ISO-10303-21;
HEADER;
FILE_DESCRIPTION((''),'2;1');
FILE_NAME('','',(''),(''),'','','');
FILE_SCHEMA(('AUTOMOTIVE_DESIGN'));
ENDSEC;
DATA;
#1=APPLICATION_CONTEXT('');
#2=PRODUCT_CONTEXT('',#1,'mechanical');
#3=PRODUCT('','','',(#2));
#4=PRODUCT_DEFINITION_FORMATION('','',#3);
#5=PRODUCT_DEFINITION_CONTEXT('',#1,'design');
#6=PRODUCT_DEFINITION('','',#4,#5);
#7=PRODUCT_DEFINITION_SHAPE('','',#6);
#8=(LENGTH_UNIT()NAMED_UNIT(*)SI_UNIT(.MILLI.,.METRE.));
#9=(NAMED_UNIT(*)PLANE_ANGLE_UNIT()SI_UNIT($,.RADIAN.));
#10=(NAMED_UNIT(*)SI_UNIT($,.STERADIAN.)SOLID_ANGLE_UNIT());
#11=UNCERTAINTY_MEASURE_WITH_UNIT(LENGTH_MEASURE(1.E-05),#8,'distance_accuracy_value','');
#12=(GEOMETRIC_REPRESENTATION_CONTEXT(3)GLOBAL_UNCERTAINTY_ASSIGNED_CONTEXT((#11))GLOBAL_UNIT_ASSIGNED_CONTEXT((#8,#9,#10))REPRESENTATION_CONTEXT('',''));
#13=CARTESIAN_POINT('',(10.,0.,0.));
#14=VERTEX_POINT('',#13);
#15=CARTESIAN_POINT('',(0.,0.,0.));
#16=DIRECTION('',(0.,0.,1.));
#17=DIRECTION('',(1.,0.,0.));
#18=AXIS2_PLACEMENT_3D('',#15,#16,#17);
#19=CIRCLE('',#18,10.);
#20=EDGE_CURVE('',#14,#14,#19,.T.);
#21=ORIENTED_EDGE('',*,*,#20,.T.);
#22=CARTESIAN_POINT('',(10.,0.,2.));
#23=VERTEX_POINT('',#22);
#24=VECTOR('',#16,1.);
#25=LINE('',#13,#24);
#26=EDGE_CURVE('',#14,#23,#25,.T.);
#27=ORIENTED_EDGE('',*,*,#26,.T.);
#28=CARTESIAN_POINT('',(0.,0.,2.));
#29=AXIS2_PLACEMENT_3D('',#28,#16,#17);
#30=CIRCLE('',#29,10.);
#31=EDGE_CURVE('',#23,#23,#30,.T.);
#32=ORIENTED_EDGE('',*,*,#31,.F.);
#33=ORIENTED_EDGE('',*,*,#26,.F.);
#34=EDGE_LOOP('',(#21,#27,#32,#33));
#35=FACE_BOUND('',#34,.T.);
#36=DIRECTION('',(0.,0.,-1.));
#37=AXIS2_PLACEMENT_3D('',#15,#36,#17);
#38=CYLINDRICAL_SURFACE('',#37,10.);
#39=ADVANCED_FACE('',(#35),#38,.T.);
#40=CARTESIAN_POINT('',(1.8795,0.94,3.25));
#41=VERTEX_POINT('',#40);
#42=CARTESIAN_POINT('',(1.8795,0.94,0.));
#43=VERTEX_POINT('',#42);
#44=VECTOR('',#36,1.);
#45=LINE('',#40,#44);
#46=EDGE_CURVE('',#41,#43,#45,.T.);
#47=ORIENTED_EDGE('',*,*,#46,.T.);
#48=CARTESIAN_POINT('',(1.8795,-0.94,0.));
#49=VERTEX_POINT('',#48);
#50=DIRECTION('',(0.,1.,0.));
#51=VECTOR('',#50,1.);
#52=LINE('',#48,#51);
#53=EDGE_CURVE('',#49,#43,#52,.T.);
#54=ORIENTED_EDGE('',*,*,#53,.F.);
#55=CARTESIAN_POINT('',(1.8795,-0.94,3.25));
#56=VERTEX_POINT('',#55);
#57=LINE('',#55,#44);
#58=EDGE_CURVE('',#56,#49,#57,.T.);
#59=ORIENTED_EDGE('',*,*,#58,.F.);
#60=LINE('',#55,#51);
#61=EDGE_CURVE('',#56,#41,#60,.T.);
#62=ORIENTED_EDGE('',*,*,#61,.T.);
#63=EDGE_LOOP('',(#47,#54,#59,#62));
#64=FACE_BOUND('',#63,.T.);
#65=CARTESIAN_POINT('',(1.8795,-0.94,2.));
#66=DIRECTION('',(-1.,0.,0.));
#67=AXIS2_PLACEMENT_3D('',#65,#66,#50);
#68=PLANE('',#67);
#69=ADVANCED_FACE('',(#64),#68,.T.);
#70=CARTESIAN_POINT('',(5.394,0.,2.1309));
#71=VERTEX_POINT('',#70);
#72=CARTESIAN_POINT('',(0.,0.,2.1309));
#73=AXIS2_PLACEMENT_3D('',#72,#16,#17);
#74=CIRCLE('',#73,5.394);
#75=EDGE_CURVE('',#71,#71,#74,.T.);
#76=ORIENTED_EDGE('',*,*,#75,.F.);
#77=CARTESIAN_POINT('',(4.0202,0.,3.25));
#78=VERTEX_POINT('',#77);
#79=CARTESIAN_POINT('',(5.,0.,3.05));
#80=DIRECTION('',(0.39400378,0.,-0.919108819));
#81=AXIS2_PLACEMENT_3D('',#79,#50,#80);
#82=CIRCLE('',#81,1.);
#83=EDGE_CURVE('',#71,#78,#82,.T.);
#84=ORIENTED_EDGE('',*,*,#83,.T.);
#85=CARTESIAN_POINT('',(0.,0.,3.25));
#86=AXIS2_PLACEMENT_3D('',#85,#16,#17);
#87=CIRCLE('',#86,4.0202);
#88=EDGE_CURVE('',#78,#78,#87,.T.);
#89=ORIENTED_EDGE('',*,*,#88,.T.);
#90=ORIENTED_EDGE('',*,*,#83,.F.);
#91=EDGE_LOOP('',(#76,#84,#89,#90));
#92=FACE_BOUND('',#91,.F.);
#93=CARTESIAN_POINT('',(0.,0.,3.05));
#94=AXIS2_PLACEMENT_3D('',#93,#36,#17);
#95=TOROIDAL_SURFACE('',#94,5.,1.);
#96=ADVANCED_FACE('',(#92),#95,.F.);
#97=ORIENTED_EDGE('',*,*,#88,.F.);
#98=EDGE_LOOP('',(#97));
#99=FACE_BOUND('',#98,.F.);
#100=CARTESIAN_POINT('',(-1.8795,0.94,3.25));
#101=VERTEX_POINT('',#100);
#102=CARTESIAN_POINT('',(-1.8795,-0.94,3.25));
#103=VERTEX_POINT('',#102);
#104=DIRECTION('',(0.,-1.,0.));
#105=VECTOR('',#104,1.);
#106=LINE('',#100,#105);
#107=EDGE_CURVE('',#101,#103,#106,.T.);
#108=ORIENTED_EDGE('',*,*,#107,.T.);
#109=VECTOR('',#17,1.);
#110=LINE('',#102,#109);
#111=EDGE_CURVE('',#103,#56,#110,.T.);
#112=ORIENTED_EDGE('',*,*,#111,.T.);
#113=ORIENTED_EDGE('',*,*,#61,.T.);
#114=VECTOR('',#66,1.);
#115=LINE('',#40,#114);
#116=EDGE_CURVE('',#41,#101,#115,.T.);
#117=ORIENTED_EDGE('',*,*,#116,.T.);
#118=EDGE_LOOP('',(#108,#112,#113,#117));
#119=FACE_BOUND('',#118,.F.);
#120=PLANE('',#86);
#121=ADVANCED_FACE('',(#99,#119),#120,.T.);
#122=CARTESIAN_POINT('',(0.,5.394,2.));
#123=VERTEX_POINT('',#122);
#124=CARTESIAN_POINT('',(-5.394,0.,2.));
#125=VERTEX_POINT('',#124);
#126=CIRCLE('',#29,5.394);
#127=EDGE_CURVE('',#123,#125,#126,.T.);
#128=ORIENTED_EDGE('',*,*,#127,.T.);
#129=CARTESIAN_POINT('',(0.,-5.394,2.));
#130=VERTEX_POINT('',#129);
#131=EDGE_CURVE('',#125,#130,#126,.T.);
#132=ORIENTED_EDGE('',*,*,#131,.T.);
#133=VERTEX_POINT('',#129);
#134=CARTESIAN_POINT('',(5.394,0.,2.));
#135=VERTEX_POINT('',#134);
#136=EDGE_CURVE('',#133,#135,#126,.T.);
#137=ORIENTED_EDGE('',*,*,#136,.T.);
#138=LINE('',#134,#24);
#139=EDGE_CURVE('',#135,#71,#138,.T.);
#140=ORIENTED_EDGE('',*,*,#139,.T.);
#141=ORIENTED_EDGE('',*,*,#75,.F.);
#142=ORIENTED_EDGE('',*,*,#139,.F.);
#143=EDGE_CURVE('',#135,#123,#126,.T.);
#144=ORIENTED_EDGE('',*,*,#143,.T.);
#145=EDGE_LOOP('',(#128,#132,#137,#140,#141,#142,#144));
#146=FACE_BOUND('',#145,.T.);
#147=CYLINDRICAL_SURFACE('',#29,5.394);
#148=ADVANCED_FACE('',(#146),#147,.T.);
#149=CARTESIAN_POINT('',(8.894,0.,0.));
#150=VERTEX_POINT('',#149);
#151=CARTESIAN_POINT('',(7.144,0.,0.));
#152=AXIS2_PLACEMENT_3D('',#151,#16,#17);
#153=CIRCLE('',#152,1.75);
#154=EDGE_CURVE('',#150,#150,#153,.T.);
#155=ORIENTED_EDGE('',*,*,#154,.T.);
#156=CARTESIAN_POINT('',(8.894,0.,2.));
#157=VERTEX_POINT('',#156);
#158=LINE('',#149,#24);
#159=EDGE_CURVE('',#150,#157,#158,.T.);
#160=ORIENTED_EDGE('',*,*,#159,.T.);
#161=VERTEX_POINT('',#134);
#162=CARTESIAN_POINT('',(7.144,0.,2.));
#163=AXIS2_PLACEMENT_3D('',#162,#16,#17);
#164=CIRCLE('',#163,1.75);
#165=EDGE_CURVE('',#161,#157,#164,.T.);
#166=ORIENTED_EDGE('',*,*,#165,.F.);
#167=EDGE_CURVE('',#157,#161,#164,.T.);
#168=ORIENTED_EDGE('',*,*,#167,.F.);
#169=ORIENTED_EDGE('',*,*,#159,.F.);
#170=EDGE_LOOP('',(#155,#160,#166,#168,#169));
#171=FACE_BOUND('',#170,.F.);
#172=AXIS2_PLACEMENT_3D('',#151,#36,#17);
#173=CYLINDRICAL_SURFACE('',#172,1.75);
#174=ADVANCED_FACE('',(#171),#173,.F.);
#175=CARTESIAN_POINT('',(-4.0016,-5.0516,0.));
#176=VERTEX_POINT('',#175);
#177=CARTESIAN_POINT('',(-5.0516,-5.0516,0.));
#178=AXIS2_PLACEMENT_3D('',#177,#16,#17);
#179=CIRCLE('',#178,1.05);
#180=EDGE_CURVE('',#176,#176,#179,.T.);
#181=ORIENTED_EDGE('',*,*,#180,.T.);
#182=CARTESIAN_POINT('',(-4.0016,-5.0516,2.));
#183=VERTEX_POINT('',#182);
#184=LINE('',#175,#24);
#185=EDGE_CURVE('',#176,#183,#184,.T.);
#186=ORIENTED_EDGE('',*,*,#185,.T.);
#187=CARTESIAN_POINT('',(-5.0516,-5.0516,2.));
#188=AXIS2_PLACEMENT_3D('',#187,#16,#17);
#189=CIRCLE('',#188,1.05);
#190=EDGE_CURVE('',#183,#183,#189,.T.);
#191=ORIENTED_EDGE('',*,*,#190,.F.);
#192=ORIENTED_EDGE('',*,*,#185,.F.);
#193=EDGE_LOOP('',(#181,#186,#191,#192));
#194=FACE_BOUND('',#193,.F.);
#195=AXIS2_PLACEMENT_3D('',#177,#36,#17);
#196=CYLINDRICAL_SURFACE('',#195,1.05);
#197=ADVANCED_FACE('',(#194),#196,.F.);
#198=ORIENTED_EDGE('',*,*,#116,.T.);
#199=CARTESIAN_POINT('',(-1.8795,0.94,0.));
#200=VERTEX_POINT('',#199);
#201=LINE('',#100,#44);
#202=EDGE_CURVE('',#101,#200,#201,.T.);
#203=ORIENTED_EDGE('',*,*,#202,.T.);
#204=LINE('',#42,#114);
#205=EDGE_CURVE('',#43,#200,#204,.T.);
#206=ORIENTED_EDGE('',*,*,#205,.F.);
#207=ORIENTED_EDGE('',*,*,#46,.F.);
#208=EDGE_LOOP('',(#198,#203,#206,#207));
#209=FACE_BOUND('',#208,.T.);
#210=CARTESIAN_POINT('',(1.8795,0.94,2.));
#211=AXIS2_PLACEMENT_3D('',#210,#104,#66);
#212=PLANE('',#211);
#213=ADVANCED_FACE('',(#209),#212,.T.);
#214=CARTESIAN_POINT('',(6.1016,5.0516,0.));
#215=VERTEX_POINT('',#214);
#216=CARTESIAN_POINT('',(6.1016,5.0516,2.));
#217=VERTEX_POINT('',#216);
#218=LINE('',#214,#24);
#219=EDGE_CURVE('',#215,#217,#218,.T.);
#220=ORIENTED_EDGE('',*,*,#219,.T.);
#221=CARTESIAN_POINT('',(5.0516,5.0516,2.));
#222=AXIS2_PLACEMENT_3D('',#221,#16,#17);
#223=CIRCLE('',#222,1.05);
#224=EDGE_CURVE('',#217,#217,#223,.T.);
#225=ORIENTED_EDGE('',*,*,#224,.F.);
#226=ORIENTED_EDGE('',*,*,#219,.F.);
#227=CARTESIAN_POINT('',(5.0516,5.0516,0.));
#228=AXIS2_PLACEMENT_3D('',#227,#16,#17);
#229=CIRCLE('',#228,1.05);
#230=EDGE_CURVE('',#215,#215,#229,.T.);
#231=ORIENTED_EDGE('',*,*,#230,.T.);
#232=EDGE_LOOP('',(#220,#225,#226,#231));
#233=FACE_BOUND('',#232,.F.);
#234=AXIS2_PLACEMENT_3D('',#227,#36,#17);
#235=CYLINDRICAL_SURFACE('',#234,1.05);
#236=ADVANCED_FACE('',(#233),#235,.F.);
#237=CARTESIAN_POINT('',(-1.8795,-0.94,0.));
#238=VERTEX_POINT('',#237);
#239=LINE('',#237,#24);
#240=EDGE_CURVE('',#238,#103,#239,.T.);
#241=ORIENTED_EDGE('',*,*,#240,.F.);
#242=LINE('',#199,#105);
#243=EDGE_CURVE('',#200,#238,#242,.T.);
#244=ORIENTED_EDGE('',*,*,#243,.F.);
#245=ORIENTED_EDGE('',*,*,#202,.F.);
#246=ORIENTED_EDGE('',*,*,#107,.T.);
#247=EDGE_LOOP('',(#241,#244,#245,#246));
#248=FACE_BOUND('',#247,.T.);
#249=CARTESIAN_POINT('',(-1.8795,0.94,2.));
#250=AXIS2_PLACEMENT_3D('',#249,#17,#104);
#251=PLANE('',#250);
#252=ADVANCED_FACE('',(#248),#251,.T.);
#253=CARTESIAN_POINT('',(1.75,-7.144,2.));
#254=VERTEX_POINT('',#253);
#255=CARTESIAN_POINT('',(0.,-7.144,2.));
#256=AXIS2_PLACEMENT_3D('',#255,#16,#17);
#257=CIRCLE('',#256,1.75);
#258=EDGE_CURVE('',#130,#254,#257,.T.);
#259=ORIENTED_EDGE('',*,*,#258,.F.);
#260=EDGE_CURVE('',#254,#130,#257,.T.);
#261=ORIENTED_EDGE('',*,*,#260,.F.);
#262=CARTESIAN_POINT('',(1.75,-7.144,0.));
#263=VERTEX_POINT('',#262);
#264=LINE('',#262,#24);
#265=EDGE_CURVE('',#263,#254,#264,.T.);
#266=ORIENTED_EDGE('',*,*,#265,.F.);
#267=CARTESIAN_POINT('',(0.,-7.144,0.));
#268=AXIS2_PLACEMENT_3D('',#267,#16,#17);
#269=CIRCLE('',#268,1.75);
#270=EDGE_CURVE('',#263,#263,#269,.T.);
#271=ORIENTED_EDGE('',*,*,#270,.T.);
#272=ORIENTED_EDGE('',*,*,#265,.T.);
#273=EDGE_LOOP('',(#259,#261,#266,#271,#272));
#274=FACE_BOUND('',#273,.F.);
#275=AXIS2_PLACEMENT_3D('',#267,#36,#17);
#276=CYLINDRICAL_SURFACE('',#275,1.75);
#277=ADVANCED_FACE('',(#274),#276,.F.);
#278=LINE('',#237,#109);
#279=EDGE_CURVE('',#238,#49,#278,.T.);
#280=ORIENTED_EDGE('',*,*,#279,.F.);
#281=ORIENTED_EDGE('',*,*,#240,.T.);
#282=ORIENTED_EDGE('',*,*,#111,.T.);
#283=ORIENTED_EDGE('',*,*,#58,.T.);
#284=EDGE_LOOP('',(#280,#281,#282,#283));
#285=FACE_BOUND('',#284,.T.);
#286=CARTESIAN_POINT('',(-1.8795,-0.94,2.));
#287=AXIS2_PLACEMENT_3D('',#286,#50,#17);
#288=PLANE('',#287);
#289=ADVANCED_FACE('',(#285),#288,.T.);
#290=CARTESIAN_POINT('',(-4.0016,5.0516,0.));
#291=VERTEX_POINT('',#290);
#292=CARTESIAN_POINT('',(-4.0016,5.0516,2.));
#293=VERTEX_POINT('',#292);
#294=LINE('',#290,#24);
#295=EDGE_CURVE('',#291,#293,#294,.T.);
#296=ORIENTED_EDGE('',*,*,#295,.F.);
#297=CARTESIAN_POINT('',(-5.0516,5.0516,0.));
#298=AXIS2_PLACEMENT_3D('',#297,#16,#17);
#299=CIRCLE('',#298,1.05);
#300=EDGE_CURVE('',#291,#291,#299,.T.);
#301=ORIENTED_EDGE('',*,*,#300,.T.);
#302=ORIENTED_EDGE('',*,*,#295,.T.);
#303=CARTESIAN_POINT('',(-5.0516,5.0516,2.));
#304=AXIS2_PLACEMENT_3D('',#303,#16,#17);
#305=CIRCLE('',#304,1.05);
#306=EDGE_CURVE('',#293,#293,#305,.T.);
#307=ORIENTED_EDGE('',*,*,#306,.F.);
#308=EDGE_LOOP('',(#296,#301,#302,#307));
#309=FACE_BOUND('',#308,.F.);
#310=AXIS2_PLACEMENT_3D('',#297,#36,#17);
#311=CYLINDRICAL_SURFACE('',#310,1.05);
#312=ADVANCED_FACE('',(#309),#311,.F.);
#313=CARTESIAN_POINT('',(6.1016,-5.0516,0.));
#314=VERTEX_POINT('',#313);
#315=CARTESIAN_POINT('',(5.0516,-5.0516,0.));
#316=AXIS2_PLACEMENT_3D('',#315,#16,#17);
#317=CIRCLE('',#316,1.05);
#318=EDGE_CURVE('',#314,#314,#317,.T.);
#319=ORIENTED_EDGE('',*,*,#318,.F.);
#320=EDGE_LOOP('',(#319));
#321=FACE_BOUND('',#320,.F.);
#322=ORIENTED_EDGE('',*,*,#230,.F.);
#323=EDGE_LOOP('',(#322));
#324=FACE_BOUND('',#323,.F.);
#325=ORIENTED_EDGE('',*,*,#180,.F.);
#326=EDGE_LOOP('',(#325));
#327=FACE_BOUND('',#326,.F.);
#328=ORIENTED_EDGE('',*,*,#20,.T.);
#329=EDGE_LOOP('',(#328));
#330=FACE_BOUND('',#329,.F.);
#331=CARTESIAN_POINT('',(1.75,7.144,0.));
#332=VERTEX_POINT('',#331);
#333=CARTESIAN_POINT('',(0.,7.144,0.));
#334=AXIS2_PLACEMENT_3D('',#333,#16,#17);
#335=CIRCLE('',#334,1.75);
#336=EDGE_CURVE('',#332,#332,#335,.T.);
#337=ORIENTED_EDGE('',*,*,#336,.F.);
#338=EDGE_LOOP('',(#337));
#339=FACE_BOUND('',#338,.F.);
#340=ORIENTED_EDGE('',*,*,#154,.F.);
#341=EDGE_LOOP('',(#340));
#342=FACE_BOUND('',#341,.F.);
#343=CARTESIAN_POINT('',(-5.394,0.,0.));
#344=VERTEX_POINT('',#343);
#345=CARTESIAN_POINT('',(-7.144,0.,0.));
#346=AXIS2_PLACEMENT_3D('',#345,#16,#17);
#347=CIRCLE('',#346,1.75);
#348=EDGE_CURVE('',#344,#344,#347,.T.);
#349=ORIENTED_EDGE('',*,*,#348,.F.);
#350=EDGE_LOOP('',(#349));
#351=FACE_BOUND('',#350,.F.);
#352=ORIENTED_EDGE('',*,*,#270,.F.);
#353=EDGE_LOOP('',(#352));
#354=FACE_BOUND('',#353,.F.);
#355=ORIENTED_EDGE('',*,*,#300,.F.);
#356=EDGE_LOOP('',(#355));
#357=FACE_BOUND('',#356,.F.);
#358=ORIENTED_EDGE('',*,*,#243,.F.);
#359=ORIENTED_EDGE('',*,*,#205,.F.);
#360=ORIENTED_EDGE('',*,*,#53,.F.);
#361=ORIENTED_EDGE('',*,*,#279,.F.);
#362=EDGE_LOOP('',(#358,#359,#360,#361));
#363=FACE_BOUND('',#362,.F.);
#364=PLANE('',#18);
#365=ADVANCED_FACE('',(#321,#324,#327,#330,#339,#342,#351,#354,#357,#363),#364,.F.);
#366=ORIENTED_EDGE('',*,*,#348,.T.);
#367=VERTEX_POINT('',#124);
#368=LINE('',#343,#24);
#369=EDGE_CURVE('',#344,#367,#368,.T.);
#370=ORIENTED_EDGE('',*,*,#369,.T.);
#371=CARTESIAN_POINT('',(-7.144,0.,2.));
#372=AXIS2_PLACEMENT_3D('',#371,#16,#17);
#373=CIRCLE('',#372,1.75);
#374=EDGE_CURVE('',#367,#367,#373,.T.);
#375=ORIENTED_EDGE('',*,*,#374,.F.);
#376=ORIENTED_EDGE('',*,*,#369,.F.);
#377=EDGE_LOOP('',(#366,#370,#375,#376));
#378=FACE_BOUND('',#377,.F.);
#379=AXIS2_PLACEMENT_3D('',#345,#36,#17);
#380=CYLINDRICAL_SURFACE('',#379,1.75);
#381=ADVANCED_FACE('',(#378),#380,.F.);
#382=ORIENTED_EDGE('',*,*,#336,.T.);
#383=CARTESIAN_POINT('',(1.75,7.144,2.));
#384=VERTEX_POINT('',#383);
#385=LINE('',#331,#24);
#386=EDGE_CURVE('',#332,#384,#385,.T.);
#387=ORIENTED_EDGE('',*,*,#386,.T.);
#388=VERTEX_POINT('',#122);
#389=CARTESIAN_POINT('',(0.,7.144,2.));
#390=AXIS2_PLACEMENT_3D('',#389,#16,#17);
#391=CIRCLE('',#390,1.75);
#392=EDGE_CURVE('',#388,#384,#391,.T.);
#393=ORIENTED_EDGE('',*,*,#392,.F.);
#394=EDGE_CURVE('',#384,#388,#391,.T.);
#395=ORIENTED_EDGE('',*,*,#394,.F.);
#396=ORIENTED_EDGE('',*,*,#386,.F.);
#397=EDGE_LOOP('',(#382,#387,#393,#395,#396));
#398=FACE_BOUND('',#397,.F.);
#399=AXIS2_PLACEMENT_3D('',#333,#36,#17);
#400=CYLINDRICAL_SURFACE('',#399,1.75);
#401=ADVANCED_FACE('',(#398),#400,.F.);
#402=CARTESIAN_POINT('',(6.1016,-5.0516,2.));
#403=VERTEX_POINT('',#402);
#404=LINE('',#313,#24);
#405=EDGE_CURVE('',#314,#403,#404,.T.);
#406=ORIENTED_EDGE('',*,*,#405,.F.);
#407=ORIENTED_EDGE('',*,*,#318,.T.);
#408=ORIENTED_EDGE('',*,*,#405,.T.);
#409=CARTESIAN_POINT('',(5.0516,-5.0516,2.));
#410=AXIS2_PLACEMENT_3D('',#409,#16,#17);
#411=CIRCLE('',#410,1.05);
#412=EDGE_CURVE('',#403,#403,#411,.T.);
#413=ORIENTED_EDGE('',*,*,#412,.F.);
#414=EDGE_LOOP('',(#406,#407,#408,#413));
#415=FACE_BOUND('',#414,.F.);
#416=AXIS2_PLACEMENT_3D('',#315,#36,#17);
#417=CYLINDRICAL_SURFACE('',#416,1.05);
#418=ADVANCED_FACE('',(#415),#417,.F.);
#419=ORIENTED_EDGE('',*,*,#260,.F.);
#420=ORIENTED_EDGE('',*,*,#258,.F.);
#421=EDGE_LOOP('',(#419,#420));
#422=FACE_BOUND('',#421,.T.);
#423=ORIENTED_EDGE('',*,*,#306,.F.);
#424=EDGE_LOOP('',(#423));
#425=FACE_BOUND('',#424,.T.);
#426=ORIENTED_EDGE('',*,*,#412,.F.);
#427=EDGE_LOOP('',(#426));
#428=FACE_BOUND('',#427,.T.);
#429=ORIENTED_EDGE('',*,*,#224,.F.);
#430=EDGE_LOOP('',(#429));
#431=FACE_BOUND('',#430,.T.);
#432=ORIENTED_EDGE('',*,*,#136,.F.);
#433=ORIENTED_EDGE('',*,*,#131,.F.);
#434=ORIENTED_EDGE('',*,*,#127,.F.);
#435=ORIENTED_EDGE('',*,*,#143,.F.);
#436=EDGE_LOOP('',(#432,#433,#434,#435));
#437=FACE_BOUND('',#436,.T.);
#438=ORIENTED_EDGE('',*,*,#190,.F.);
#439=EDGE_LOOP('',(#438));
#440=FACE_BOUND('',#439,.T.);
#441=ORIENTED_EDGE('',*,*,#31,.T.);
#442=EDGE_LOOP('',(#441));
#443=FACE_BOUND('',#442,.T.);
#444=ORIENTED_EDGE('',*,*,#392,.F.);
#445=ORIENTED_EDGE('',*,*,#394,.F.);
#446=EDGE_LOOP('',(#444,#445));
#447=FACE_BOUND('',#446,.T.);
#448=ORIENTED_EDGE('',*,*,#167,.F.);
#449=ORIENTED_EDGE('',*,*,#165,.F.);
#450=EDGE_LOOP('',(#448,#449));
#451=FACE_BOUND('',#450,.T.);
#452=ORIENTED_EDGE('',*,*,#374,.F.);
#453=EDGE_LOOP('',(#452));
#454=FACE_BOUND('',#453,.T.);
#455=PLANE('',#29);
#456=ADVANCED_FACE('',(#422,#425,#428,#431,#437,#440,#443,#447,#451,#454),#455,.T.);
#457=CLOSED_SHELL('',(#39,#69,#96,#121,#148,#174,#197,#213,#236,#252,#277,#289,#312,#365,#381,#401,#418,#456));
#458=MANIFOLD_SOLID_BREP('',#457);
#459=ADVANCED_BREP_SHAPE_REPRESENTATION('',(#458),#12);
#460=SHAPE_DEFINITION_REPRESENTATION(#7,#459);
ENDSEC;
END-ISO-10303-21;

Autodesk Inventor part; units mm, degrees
ref_plane "YZ Plane" through (0, 0, 0) normal (1, 0, 0) x (0, 1, 0)
ref_plane "XZ Plane" through (0, 0, 0) normal (0, 1, 0) x (-1, 0, 0)
ref_plane "XY Plane" through (0, 0, 0) normal (0, 0, 1) x (1, 0, 0)
sketch "Endflansch" plane through (0, 0, 0) normal (0, 0, 1) x (1, 0, 0)
  circle A0 centre (0, 0) radius 10
  line L0 (0, 14) -> (0, -14) construction
  line L1 (-14, 0) -> (14, 0) construction
  line L2 (-1.8795, -0.94) -> (1.8795, -0.94)
  line L3 (1.8795, -0.94) -> (1.8795, 0.94)
  line L4 (1.8795, 0.94) -> (-1.8795, 0.94)
  line L5 (-1.8795, 0.94) -> (-1.8795, -0.94)
  line L6 (-1.8795, -0.94) -> (1.8795, 0.94) construction
  line L7 (1.8795, -0.94) -> (-1.8795, 0.94) construction
  circle A1 centre (0, 7.144) radius 1.75
  line L8 (0, 0) -> (9.8265, 9.8265) construction
  circle A2 centre (5.0516, 5.0516) radius 1.05
  circle A3 centre (0, 0) radius 7.144 construction
  circle A4 centre (0, 0) radius 3.865
  circle A5 centre (-7.144, 0) radius 1.75
  circle A6 centre (-5.0516, 5.0516) radius 1.05
  circle A7 centre (0, -7.144) radius 1.75
  circle A8 centre (-5.0516, -5.0516) radius 1.05
  circle A9 centre (7.144, 0) radius 1.75
  circle A10 centre (5.0516, -5.0516) radius 1.05
  dimension "d1" = 20
  dimension "d3" = 1.88
  dimension "d4" = 3.759
  dimension "d5" = 90
  dimension "d7" = 3.5
  dimension "d8" = 45
  dimension "d9" = 2.1
  dimension "d10" = 7.144
  dimension "d14" = 360
  dimension "d20" = 7.73
extrude "Extrusion1" add sketch "Endflansch" along normal blind 2 contours A0 | A4
extrude "Extrusion2" add sketch "Endflansch" along normal blind 1.25 from surface at 2 contours A4
sketch "Skizze2" plane through (0, 0, 0) normal (0, 1, 0) x (-1, 0, 0)
  line L0 (3.865, 3.25) -> (3.865, 2) projected
  line L1 (3.865, 2) -> (5.394, 2) projected
  line L2 (5.394, 2) -> (5.394, 0) projected
  line L3 (5.394, 0) -> (1.8795, 0) projected
  line L4 (1.8795, 0) -> (1.8795, 3.25) projected
  line L5 (1.8795, 3.25) -> (3.865, 3.25) projected
  line L6 (-1.8795, 3.25) -> (-1.8795, 0) projected
  line L7 (-1.8795, 0) -> (-5.394, 0) projected
  line L8 (-5.394, 0) -> (-5.394, 2) projected
  line L9 (-5.394, 2) -> (-3.865, 2) projected
  line L10 (-3.865, 2) -> (-3.865, 3.25) projected
  line L11 (-3.865, 3.25) -> (-1.8795, 3.25) projected
  line L12 (10, 0) -> (8.894, 0) projected
  line L13 (8.894, 0) -> (8.894, 2) projected
  line L14 (8.894, 2) -> (10, 2) projected
  line L15 (10, 2) -> (10, 0) projected
  line L16 (-8.894, 0) -> (-10, 0) projected
  line L17 (-10, 0) -> (-10, 2) projected
  line L18 (-10, 2) -> (-8.894, 2) projected
  line L19 (-8.894, 2) -> (-8.894, 0) projected
  line L20 (0, -0.96) -> (0, 5.76) construction
  circle A0 centre (-5, 3.05) radius 1
  line L21 (-3.865, 3.25) -> (-4.0202, 3.25)
  line L22 (-3.865, 2) -> (-3.865, 3.25) construction
  line L23 (-8.894, 2) -> (-5.394, 2) construction
  line L24 (-5.394, 2) -> (-5.394, 2.1309)
  point P0 (0, 0)
  dimension "d21" = 2
  dimension "d22" = 5
  dimension "d28" = 0.2
revolve "Umdrehung1" add sketch "Skizze2" angle 360 about axis through (0, 0, -10) along (0, 0, 1) contours L10 L9 L24 A0 L21
extrude "Extrusion3" [suppressed]
equation "\"d3\" = Hohlleiter_b"
equation "\"d4\" = Hohlleiter_h"
equation "\"d7\" = Bohrung_IHF_Schraube"
equation "\"d9\" = Bohrung_IHF_Passstift"
equation "\"d20\" = Hohlleiter_Erhebung_d"
equation "\"Hohlleiter_h\" = 3.759"
equation "\"Hohlleiter_b\" = 1.88"
equation "\"Hohlleiter_Orientation\" = 0"
equation "\"Bohrung_IHF_Schraube\" = 3.5"
equation "\"Bohrung_IHF_Passstift\" = 2.1"
equation "\"Hohlleiter_Erhebung_d\" = 7.73"
properties part number "Hohlleiter-EndflanschV5"
